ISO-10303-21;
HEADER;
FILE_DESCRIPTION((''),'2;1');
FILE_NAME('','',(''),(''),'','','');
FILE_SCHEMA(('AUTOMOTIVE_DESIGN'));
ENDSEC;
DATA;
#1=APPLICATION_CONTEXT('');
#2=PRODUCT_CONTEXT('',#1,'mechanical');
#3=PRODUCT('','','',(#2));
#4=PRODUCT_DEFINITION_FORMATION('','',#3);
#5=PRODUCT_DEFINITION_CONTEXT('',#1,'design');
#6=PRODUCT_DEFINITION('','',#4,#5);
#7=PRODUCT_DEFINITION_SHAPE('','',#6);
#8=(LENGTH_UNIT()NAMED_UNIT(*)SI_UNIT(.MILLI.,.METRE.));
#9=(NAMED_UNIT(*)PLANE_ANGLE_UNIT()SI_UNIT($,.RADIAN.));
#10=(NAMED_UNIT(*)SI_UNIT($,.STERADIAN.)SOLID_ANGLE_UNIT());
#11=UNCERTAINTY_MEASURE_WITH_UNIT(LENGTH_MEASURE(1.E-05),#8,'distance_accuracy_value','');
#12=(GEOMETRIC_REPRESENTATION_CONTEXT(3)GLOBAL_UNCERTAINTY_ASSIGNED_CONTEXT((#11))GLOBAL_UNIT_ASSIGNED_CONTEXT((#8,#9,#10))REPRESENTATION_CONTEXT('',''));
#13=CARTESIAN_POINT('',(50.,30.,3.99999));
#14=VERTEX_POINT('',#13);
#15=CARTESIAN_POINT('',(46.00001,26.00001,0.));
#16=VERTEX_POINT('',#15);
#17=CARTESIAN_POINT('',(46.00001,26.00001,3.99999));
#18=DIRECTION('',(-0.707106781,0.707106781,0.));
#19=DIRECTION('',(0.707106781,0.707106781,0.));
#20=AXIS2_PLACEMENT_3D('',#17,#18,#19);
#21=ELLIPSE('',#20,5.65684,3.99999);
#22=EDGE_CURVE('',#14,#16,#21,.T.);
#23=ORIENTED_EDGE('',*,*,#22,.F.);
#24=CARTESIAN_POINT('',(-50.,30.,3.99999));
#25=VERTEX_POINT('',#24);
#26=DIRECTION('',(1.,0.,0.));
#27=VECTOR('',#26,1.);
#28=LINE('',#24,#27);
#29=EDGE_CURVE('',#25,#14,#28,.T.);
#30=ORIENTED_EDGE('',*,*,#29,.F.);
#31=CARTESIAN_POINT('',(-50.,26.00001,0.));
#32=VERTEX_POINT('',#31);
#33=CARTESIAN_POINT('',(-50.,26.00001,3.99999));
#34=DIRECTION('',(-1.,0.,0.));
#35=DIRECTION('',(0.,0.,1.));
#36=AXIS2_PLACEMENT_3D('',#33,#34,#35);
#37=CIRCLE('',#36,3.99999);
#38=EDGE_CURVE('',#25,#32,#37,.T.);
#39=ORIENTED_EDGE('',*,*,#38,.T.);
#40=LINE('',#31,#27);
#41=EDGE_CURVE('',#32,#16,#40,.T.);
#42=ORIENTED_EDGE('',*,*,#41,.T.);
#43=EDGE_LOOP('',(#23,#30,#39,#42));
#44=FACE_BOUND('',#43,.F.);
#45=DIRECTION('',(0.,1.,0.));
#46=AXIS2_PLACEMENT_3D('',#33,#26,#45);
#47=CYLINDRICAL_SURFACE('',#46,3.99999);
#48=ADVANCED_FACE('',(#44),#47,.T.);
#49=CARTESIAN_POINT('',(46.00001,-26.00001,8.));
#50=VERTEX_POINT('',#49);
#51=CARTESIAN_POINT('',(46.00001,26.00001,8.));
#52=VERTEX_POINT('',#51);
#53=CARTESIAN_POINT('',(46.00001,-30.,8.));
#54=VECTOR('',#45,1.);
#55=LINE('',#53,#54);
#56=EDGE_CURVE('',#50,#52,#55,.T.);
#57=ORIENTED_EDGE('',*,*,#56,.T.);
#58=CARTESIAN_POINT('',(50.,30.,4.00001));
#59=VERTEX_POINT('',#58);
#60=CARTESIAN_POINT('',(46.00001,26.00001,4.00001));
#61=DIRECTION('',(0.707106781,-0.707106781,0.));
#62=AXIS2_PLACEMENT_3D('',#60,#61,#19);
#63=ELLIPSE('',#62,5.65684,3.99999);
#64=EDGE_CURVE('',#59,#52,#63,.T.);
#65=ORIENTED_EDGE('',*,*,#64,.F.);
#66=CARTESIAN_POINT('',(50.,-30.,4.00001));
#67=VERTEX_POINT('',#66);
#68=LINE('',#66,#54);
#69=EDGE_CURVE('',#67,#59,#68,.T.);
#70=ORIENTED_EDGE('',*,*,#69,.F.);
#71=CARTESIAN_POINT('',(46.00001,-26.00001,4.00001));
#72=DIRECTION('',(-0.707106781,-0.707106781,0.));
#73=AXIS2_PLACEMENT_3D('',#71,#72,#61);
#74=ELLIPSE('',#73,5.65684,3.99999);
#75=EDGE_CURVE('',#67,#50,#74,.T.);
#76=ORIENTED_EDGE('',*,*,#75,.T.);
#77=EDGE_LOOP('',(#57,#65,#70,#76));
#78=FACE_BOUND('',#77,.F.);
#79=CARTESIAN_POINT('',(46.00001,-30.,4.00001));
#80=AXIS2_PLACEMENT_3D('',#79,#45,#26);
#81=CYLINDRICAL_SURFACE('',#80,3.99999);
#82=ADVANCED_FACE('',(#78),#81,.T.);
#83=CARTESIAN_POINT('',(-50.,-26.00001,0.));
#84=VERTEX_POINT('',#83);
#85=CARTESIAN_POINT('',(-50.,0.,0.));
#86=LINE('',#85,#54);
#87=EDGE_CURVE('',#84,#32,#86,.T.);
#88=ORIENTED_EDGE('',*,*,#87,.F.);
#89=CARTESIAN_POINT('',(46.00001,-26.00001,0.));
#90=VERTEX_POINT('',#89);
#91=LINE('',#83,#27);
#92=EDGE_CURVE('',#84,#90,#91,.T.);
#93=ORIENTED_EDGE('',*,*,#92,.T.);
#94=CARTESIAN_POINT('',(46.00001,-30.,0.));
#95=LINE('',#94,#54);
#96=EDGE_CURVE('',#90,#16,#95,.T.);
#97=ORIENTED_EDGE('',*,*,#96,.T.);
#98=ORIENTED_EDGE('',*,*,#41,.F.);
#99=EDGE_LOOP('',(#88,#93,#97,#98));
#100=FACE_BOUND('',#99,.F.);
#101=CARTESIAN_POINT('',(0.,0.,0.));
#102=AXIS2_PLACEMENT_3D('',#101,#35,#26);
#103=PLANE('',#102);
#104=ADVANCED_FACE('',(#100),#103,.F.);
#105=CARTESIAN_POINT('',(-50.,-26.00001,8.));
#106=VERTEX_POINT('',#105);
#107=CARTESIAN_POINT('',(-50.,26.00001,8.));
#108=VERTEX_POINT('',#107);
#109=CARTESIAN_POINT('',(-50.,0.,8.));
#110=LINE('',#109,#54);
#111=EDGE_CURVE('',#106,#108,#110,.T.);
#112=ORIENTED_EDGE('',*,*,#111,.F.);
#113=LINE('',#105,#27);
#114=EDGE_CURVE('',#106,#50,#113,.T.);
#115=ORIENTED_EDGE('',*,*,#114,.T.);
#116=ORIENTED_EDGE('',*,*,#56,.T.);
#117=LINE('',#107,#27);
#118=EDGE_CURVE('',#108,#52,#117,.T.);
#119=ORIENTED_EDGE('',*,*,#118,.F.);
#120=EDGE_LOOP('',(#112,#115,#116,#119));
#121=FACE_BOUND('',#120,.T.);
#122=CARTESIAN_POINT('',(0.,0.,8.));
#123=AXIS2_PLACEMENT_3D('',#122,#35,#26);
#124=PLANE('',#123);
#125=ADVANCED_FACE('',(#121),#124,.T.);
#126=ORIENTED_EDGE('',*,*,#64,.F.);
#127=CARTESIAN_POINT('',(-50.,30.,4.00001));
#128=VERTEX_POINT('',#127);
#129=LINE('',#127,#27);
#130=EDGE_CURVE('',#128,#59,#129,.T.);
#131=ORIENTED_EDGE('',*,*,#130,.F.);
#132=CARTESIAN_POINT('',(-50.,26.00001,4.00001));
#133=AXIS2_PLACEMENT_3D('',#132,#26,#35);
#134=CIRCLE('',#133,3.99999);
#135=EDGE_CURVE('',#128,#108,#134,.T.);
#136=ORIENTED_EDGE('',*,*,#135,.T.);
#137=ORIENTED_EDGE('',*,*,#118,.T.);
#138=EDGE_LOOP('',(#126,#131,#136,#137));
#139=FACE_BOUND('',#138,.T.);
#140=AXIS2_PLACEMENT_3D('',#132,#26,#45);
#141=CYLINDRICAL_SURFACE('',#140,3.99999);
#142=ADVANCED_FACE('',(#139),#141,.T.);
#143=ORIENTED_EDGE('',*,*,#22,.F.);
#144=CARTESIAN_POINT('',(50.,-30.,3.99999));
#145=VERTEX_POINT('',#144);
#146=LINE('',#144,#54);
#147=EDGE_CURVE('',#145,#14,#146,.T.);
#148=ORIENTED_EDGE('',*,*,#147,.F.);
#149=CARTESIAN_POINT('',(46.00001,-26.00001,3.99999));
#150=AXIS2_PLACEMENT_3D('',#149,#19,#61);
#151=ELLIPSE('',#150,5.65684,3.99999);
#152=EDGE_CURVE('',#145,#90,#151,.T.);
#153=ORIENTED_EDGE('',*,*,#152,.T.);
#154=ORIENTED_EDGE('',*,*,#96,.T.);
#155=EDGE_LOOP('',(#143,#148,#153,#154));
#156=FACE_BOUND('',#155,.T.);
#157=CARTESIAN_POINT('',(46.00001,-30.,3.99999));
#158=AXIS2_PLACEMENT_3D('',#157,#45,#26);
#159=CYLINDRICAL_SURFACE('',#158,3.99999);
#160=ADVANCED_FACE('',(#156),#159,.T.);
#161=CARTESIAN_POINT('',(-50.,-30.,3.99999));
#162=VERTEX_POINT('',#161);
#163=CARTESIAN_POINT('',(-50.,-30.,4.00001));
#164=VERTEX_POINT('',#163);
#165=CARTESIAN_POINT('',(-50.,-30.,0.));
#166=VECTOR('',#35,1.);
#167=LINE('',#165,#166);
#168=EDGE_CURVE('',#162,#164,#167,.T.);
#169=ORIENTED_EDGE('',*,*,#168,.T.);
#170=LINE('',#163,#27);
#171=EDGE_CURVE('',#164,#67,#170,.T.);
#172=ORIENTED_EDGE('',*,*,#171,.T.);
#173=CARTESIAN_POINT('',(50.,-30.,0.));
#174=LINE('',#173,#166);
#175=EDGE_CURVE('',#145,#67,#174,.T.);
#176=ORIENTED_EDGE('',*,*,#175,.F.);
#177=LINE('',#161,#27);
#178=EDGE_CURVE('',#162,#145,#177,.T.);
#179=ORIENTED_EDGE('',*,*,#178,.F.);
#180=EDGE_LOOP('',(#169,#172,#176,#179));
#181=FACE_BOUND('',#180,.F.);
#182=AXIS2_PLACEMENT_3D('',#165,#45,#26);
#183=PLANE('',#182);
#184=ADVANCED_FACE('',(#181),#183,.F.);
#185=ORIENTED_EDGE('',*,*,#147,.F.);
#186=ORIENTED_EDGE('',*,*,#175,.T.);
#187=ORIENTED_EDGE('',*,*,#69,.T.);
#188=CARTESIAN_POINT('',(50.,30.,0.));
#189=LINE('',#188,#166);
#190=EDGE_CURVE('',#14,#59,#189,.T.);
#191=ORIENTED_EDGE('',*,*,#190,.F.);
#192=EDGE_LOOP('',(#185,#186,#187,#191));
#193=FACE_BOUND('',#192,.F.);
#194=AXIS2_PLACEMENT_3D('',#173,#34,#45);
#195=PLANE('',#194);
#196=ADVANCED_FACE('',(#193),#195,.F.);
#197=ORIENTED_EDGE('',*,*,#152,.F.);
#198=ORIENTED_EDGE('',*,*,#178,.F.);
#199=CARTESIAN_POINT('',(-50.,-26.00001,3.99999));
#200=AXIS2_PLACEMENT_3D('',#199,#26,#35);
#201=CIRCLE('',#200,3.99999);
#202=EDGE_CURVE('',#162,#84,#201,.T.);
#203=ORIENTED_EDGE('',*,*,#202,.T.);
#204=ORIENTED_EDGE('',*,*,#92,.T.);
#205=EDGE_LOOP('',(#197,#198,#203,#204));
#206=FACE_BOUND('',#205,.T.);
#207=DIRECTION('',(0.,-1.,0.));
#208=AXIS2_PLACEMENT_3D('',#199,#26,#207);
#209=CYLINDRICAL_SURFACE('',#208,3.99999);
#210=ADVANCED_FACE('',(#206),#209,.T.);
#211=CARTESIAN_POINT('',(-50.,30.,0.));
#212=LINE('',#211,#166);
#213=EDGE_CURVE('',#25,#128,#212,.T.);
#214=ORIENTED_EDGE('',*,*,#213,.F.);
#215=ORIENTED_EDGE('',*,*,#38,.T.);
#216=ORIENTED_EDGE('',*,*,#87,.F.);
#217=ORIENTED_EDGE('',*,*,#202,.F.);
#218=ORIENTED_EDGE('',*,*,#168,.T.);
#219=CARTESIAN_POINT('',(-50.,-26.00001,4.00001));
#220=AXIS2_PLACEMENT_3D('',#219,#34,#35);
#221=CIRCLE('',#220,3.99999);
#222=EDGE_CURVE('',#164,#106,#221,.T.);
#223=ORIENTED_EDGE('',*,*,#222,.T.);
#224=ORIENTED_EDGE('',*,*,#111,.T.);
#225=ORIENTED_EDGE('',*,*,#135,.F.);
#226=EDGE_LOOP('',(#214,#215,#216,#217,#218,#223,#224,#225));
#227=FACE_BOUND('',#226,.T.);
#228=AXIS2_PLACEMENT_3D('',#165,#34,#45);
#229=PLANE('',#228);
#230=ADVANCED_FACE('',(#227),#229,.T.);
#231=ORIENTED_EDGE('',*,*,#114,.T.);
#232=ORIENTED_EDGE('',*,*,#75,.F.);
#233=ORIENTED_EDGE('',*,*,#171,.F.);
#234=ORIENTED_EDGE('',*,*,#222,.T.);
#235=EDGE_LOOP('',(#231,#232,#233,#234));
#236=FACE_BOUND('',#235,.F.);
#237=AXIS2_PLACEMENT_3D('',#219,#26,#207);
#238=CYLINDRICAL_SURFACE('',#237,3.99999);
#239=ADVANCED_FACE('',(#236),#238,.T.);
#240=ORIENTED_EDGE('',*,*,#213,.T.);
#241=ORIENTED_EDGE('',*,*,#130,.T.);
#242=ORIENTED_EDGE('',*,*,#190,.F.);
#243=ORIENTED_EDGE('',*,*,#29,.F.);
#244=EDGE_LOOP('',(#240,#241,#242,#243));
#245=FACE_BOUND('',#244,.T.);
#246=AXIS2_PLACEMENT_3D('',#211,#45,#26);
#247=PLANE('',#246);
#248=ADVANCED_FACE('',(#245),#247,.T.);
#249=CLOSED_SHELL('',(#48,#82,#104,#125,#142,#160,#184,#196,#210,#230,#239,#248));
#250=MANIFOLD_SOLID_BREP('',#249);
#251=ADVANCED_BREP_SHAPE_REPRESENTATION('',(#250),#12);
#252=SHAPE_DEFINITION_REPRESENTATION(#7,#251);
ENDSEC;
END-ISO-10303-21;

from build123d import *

# Parameters (mm, degrees)
F0_W     = 100
F0_H     = 60
F1_DEPTH = 8
F2_R     = 3.99999


# Not quite as in the source:
# - a fillet or chamfer is up to 0.001 mm smaller than in the source, because OpenCascade refuses the exact size


with BuildPart() as f1:
    # F0 (on Top) → F1 (new body)
    with BuildSketch(Plane.XY):
        Rectangle(F0_W, F0_H)
    extrude(amount=F1_DEPTH)

    # F2 (radius 4 in the source; OpenCascade refuses exactly that, so slightly less here)
    f2_edges = [f1.edges().sort_by_distance(p)[0] for p in [
        (0, -30, 8),
        (0, -30, 0),
        (50, 0, 8),
        (50, 0, 0),
        (0, 30, 8),
        (0, 30, 0),
    ]]
    fillet(f2_edges, radius=F2_R)


solid = f1.part
